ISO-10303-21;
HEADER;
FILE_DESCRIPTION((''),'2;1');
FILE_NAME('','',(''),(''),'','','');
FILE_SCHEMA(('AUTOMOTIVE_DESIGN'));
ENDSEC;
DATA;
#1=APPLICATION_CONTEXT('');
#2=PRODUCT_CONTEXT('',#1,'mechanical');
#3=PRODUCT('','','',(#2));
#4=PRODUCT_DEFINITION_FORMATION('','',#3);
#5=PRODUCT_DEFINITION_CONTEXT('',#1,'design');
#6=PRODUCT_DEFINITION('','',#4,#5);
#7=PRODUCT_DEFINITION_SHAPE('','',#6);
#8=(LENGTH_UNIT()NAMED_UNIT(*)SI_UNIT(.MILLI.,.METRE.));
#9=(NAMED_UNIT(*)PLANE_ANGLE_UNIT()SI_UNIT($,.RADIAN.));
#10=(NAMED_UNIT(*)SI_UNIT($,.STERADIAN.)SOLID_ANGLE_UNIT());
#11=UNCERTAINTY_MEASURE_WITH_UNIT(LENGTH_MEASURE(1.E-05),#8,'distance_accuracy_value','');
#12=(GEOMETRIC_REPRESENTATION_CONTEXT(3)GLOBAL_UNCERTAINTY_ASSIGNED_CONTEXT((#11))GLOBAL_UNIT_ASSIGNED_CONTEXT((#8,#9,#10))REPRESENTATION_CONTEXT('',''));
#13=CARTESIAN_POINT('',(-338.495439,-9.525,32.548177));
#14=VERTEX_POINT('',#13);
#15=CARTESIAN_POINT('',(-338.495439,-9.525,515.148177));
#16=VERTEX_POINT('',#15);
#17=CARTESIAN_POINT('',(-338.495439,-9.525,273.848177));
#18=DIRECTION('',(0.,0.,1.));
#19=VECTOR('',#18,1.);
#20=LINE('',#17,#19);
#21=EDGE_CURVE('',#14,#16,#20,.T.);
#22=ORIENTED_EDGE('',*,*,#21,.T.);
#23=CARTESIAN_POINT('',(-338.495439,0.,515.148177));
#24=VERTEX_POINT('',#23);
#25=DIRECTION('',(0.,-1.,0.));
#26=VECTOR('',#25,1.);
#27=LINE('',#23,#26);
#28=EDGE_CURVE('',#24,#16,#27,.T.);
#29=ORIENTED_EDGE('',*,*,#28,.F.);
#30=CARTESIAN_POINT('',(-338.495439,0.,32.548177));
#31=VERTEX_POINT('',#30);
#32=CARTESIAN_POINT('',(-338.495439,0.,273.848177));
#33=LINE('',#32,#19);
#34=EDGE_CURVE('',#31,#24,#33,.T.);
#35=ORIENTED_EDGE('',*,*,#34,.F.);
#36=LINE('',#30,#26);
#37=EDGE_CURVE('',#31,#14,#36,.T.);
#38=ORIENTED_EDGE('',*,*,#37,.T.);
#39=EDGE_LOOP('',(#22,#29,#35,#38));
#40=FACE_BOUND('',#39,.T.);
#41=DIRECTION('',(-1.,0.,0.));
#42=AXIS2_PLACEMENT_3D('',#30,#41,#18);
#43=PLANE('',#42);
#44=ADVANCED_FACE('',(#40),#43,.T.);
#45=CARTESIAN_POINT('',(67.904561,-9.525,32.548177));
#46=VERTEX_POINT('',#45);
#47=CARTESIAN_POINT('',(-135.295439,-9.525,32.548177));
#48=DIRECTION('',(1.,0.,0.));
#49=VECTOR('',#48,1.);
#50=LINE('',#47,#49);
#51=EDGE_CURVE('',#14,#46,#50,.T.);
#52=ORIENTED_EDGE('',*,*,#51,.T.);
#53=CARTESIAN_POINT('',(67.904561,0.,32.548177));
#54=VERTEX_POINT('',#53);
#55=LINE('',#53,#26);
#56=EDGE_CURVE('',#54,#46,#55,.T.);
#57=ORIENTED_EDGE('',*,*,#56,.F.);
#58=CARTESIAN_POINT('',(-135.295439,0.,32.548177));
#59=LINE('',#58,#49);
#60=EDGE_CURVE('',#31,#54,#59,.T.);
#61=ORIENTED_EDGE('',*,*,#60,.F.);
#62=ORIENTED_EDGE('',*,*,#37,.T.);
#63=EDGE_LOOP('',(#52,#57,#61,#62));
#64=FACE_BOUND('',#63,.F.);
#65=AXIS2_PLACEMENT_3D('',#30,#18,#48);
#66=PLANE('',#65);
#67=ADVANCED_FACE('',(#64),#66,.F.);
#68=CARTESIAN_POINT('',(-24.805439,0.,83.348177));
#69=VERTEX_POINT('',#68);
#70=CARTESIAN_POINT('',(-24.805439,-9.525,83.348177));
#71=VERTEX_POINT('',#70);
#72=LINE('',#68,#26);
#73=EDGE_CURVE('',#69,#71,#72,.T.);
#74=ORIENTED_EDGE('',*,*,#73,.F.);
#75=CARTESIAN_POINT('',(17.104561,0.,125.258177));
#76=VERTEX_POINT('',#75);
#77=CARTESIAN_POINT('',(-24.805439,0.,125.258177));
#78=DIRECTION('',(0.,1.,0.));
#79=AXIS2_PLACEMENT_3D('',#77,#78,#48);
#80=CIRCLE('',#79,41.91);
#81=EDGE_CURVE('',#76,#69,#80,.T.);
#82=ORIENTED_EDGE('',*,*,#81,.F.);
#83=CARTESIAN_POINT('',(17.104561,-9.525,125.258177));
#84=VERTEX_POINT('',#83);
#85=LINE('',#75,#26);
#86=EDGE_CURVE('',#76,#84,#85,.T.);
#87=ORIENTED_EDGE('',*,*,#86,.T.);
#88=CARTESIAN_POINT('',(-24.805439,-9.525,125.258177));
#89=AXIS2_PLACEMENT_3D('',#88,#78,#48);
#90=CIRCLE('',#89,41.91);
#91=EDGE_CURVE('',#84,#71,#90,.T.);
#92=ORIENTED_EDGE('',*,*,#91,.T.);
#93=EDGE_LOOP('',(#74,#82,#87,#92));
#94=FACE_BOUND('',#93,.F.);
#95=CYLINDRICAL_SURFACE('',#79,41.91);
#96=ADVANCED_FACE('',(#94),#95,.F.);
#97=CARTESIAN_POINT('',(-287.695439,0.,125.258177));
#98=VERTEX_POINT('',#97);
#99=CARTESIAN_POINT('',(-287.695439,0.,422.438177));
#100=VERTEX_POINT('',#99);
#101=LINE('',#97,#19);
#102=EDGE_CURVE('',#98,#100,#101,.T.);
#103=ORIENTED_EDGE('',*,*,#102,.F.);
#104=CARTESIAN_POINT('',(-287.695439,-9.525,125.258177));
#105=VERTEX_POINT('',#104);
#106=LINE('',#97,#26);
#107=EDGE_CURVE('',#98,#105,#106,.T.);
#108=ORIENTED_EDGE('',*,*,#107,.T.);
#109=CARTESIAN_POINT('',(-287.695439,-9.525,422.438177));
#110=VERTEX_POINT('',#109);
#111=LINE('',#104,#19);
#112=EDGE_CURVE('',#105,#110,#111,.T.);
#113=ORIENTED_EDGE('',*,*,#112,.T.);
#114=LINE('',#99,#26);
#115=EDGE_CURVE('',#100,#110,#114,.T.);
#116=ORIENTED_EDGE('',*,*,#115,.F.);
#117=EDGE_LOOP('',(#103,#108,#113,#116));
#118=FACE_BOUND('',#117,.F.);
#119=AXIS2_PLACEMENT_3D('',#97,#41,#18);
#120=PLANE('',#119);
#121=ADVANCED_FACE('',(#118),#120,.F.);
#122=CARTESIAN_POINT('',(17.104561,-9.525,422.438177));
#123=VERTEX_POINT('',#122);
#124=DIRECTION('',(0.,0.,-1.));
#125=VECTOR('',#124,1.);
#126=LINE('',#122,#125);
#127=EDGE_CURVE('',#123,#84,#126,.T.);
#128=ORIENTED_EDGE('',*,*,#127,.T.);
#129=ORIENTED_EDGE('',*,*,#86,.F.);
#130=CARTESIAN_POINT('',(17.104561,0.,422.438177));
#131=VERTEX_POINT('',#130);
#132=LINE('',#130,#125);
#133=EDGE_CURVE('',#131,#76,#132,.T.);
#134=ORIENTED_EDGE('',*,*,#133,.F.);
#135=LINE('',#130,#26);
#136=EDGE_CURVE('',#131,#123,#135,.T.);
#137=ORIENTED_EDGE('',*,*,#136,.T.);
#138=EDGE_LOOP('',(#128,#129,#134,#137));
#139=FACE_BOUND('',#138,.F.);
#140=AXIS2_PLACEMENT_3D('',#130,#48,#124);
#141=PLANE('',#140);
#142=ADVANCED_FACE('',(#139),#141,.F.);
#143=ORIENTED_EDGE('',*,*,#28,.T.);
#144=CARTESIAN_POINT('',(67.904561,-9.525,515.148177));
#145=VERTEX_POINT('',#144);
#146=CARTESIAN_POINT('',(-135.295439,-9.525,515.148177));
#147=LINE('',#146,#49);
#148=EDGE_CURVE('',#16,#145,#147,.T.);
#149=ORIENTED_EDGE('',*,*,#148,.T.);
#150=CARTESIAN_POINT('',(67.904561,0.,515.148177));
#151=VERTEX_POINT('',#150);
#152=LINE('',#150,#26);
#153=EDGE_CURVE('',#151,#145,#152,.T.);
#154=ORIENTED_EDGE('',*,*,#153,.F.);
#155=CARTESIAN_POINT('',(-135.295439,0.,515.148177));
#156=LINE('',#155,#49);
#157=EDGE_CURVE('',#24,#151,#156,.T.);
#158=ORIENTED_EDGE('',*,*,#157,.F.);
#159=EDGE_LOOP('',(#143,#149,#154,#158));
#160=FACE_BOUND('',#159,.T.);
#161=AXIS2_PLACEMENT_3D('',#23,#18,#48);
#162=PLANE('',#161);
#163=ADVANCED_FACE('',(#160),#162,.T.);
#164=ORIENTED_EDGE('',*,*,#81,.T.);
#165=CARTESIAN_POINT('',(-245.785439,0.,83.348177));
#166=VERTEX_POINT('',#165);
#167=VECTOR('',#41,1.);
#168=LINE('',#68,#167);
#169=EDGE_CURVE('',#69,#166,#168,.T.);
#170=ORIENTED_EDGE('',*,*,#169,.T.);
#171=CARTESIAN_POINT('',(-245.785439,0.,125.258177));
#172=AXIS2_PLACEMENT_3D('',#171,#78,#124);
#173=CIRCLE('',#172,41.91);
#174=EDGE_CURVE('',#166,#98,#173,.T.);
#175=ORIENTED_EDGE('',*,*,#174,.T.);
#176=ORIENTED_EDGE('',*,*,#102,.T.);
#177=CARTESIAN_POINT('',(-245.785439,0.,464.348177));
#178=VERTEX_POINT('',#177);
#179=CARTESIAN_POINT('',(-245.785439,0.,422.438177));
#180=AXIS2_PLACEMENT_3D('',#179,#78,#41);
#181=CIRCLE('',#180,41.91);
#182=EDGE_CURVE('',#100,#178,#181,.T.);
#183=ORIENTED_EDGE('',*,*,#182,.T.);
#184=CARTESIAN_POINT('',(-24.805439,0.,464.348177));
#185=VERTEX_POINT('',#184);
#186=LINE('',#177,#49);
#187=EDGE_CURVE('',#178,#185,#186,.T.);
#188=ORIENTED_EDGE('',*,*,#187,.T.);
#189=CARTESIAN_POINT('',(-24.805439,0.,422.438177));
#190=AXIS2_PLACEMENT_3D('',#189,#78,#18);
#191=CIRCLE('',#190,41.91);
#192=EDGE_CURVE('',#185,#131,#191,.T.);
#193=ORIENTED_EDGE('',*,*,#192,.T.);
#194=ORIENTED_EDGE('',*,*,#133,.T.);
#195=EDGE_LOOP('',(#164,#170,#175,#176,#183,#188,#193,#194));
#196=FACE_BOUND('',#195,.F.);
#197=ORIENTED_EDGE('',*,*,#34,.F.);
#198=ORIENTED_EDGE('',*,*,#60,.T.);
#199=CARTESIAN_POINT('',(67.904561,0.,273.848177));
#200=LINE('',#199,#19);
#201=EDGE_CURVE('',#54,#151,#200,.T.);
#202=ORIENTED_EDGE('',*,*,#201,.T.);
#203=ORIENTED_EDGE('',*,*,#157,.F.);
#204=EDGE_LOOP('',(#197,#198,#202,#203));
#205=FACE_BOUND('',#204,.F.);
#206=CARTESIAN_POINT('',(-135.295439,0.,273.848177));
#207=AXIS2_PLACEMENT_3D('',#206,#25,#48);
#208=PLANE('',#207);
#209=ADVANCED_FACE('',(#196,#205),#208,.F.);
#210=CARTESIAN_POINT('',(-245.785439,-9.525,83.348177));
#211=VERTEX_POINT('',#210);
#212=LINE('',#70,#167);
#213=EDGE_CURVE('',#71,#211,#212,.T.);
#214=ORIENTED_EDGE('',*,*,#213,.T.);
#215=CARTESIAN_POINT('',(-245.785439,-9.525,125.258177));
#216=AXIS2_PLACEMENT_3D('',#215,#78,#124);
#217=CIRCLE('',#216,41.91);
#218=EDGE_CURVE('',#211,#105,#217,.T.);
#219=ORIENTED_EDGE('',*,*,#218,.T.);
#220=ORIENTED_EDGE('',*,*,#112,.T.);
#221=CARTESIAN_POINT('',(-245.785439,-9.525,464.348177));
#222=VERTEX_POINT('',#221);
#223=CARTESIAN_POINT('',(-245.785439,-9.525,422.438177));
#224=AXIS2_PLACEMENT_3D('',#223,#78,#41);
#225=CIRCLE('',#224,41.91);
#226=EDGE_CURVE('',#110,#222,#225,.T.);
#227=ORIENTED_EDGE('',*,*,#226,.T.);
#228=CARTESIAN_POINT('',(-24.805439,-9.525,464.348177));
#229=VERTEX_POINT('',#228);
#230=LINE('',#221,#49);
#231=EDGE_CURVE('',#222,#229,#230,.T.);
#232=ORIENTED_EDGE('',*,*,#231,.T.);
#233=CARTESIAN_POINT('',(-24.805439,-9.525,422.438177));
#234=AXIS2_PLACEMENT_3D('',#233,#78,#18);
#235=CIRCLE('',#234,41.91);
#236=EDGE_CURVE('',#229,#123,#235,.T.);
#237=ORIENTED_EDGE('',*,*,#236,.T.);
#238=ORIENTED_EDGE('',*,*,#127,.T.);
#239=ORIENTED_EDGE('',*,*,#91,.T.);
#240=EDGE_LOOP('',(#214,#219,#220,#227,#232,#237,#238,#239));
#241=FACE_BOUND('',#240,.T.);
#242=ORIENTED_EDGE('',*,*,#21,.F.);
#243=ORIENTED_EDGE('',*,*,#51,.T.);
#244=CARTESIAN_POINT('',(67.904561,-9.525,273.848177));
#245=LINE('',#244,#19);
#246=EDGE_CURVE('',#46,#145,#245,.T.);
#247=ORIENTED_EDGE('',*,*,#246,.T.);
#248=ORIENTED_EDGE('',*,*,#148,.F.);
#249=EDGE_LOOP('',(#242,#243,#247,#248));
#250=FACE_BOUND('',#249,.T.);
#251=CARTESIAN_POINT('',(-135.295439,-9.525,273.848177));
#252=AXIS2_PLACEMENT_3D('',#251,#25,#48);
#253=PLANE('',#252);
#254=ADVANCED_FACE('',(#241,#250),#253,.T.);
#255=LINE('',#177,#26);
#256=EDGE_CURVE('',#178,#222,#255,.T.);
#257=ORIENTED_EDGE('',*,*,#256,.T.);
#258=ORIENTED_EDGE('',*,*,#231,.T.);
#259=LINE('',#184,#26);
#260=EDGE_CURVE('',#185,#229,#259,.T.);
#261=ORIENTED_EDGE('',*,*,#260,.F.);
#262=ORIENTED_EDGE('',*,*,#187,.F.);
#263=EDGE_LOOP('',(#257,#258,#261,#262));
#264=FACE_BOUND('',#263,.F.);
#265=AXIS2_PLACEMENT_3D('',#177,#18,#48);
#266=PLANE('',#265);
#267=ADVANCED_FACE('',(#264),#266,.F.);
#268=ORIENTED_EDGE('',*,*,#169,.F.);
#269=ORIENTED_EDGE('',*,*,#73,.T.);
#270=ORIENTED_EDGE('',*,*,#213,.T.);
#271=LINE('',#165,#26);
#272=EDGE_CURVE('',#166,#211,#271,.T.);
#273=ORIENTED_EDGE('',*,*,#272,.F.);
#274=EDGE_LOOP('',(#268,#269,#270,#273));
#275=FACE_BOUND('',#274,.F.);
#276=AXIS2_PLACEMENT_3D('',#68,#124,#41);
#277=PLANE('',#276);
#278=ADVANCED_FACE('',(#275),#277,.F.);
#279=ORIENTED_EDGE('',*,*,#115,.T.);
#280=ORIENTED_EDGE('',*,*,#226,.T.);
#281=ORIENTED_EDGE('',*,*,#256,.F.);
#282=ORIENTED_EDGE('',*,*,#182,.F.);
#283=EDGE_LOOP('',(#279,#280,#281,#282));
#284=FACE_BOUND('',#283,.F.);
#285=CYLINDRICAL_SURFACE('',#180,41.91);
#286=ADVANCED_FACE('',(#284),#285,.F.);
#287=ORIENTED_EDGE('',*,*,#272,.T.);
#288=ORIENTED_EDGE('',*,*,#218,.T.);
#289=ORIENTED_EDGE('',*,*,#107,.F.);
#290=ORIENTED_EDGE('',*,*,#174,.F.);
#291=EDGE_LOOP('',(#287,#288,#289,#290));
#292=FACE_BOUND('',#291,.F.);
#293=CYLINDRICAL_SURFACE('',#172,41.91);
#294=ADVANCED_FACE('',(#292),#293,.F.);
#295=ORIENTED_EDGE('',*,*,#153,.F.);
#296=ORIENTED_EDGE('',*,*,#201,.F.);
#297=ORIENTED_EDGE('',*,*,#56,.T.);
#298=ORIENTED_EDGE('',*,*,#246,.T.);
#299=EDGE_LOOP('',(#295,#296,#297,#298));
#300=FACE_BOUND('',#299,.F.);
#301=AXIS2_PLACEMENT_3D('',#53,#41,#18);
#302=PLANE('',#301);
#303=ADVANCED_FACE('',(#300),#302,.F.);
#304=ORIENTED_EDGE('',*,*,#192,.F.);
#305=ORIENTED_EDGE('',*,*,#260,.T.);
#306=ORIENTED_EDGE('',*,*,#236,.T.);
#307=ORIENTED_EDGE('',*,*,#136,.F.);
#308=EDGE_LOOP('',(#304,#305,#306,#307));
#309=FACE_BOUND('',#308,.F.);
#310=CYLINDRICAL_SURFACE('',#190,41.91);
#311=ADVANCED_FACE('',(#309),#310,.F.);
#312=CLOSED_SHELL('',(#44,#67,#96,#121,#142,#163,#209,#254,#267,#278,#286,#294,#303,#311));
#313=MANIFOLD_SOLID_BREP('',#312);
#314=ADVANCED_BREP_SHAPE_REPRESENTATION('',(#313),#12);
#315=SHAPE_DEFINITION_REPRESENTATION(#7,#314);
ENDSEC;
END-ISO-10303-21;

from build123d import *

# Parameters (mm, degrees)
F0_W     = 406.4
F0_H     = 482.6
F1_DEPTH = 9.525


# Not quite as in the source:
# - a length typed as a fraction of an inch, garbled in the dataset ("3 / 203.2 mm" for 3/8 in), is restored


with BuildPart() as f1:
    # F0 (on Front) → F1 (new body)
    with BuildSketch(Plane.XZ):
        with Locations((-135.2954388559, 273.8481773734)):
            Rectangle(F0_W, F0_H)
        with BuildLine():
            ThreePointArc((17.1045611441, 125.2581773734), (4.8294063436, 95.6233321739), (-24.8054388559, 83.3481773734))
            Line((-24.8054388559, 83.3481773734), (-245.7854388559, 83.3481773734))
            ThreePointArc((-245.7854388559, 83.3481773734), (-275.4202840554, 95.6233321739), (-287.6954388559, 125.2581773734))
            Line((-287.6954388559, 125.2581773734), (-287.6954388559, 422.4381773734))
            ThreePointArc((-287.6954388559, 422.4381773734), (-275.4202840554, 452.0730225729), (-245.7854388559, 464.3481773734))
            Line((-245.7854388559, 464.3481773734), (-24.8054388559, 464.3481773734))
            ThreePointArc((-24.8054388559, 464.3481773734), (4.8294063436, 452.0730225729), (17.1045611441, 422.4381773734))
            Line((17.1045611441, 422.4381773734), (17.1045611441, 125.2581773734))
        make_face(mode=Mode.SUBTRACT)
    extrude(amount=F1_DEPTH)


solid = f1.part
